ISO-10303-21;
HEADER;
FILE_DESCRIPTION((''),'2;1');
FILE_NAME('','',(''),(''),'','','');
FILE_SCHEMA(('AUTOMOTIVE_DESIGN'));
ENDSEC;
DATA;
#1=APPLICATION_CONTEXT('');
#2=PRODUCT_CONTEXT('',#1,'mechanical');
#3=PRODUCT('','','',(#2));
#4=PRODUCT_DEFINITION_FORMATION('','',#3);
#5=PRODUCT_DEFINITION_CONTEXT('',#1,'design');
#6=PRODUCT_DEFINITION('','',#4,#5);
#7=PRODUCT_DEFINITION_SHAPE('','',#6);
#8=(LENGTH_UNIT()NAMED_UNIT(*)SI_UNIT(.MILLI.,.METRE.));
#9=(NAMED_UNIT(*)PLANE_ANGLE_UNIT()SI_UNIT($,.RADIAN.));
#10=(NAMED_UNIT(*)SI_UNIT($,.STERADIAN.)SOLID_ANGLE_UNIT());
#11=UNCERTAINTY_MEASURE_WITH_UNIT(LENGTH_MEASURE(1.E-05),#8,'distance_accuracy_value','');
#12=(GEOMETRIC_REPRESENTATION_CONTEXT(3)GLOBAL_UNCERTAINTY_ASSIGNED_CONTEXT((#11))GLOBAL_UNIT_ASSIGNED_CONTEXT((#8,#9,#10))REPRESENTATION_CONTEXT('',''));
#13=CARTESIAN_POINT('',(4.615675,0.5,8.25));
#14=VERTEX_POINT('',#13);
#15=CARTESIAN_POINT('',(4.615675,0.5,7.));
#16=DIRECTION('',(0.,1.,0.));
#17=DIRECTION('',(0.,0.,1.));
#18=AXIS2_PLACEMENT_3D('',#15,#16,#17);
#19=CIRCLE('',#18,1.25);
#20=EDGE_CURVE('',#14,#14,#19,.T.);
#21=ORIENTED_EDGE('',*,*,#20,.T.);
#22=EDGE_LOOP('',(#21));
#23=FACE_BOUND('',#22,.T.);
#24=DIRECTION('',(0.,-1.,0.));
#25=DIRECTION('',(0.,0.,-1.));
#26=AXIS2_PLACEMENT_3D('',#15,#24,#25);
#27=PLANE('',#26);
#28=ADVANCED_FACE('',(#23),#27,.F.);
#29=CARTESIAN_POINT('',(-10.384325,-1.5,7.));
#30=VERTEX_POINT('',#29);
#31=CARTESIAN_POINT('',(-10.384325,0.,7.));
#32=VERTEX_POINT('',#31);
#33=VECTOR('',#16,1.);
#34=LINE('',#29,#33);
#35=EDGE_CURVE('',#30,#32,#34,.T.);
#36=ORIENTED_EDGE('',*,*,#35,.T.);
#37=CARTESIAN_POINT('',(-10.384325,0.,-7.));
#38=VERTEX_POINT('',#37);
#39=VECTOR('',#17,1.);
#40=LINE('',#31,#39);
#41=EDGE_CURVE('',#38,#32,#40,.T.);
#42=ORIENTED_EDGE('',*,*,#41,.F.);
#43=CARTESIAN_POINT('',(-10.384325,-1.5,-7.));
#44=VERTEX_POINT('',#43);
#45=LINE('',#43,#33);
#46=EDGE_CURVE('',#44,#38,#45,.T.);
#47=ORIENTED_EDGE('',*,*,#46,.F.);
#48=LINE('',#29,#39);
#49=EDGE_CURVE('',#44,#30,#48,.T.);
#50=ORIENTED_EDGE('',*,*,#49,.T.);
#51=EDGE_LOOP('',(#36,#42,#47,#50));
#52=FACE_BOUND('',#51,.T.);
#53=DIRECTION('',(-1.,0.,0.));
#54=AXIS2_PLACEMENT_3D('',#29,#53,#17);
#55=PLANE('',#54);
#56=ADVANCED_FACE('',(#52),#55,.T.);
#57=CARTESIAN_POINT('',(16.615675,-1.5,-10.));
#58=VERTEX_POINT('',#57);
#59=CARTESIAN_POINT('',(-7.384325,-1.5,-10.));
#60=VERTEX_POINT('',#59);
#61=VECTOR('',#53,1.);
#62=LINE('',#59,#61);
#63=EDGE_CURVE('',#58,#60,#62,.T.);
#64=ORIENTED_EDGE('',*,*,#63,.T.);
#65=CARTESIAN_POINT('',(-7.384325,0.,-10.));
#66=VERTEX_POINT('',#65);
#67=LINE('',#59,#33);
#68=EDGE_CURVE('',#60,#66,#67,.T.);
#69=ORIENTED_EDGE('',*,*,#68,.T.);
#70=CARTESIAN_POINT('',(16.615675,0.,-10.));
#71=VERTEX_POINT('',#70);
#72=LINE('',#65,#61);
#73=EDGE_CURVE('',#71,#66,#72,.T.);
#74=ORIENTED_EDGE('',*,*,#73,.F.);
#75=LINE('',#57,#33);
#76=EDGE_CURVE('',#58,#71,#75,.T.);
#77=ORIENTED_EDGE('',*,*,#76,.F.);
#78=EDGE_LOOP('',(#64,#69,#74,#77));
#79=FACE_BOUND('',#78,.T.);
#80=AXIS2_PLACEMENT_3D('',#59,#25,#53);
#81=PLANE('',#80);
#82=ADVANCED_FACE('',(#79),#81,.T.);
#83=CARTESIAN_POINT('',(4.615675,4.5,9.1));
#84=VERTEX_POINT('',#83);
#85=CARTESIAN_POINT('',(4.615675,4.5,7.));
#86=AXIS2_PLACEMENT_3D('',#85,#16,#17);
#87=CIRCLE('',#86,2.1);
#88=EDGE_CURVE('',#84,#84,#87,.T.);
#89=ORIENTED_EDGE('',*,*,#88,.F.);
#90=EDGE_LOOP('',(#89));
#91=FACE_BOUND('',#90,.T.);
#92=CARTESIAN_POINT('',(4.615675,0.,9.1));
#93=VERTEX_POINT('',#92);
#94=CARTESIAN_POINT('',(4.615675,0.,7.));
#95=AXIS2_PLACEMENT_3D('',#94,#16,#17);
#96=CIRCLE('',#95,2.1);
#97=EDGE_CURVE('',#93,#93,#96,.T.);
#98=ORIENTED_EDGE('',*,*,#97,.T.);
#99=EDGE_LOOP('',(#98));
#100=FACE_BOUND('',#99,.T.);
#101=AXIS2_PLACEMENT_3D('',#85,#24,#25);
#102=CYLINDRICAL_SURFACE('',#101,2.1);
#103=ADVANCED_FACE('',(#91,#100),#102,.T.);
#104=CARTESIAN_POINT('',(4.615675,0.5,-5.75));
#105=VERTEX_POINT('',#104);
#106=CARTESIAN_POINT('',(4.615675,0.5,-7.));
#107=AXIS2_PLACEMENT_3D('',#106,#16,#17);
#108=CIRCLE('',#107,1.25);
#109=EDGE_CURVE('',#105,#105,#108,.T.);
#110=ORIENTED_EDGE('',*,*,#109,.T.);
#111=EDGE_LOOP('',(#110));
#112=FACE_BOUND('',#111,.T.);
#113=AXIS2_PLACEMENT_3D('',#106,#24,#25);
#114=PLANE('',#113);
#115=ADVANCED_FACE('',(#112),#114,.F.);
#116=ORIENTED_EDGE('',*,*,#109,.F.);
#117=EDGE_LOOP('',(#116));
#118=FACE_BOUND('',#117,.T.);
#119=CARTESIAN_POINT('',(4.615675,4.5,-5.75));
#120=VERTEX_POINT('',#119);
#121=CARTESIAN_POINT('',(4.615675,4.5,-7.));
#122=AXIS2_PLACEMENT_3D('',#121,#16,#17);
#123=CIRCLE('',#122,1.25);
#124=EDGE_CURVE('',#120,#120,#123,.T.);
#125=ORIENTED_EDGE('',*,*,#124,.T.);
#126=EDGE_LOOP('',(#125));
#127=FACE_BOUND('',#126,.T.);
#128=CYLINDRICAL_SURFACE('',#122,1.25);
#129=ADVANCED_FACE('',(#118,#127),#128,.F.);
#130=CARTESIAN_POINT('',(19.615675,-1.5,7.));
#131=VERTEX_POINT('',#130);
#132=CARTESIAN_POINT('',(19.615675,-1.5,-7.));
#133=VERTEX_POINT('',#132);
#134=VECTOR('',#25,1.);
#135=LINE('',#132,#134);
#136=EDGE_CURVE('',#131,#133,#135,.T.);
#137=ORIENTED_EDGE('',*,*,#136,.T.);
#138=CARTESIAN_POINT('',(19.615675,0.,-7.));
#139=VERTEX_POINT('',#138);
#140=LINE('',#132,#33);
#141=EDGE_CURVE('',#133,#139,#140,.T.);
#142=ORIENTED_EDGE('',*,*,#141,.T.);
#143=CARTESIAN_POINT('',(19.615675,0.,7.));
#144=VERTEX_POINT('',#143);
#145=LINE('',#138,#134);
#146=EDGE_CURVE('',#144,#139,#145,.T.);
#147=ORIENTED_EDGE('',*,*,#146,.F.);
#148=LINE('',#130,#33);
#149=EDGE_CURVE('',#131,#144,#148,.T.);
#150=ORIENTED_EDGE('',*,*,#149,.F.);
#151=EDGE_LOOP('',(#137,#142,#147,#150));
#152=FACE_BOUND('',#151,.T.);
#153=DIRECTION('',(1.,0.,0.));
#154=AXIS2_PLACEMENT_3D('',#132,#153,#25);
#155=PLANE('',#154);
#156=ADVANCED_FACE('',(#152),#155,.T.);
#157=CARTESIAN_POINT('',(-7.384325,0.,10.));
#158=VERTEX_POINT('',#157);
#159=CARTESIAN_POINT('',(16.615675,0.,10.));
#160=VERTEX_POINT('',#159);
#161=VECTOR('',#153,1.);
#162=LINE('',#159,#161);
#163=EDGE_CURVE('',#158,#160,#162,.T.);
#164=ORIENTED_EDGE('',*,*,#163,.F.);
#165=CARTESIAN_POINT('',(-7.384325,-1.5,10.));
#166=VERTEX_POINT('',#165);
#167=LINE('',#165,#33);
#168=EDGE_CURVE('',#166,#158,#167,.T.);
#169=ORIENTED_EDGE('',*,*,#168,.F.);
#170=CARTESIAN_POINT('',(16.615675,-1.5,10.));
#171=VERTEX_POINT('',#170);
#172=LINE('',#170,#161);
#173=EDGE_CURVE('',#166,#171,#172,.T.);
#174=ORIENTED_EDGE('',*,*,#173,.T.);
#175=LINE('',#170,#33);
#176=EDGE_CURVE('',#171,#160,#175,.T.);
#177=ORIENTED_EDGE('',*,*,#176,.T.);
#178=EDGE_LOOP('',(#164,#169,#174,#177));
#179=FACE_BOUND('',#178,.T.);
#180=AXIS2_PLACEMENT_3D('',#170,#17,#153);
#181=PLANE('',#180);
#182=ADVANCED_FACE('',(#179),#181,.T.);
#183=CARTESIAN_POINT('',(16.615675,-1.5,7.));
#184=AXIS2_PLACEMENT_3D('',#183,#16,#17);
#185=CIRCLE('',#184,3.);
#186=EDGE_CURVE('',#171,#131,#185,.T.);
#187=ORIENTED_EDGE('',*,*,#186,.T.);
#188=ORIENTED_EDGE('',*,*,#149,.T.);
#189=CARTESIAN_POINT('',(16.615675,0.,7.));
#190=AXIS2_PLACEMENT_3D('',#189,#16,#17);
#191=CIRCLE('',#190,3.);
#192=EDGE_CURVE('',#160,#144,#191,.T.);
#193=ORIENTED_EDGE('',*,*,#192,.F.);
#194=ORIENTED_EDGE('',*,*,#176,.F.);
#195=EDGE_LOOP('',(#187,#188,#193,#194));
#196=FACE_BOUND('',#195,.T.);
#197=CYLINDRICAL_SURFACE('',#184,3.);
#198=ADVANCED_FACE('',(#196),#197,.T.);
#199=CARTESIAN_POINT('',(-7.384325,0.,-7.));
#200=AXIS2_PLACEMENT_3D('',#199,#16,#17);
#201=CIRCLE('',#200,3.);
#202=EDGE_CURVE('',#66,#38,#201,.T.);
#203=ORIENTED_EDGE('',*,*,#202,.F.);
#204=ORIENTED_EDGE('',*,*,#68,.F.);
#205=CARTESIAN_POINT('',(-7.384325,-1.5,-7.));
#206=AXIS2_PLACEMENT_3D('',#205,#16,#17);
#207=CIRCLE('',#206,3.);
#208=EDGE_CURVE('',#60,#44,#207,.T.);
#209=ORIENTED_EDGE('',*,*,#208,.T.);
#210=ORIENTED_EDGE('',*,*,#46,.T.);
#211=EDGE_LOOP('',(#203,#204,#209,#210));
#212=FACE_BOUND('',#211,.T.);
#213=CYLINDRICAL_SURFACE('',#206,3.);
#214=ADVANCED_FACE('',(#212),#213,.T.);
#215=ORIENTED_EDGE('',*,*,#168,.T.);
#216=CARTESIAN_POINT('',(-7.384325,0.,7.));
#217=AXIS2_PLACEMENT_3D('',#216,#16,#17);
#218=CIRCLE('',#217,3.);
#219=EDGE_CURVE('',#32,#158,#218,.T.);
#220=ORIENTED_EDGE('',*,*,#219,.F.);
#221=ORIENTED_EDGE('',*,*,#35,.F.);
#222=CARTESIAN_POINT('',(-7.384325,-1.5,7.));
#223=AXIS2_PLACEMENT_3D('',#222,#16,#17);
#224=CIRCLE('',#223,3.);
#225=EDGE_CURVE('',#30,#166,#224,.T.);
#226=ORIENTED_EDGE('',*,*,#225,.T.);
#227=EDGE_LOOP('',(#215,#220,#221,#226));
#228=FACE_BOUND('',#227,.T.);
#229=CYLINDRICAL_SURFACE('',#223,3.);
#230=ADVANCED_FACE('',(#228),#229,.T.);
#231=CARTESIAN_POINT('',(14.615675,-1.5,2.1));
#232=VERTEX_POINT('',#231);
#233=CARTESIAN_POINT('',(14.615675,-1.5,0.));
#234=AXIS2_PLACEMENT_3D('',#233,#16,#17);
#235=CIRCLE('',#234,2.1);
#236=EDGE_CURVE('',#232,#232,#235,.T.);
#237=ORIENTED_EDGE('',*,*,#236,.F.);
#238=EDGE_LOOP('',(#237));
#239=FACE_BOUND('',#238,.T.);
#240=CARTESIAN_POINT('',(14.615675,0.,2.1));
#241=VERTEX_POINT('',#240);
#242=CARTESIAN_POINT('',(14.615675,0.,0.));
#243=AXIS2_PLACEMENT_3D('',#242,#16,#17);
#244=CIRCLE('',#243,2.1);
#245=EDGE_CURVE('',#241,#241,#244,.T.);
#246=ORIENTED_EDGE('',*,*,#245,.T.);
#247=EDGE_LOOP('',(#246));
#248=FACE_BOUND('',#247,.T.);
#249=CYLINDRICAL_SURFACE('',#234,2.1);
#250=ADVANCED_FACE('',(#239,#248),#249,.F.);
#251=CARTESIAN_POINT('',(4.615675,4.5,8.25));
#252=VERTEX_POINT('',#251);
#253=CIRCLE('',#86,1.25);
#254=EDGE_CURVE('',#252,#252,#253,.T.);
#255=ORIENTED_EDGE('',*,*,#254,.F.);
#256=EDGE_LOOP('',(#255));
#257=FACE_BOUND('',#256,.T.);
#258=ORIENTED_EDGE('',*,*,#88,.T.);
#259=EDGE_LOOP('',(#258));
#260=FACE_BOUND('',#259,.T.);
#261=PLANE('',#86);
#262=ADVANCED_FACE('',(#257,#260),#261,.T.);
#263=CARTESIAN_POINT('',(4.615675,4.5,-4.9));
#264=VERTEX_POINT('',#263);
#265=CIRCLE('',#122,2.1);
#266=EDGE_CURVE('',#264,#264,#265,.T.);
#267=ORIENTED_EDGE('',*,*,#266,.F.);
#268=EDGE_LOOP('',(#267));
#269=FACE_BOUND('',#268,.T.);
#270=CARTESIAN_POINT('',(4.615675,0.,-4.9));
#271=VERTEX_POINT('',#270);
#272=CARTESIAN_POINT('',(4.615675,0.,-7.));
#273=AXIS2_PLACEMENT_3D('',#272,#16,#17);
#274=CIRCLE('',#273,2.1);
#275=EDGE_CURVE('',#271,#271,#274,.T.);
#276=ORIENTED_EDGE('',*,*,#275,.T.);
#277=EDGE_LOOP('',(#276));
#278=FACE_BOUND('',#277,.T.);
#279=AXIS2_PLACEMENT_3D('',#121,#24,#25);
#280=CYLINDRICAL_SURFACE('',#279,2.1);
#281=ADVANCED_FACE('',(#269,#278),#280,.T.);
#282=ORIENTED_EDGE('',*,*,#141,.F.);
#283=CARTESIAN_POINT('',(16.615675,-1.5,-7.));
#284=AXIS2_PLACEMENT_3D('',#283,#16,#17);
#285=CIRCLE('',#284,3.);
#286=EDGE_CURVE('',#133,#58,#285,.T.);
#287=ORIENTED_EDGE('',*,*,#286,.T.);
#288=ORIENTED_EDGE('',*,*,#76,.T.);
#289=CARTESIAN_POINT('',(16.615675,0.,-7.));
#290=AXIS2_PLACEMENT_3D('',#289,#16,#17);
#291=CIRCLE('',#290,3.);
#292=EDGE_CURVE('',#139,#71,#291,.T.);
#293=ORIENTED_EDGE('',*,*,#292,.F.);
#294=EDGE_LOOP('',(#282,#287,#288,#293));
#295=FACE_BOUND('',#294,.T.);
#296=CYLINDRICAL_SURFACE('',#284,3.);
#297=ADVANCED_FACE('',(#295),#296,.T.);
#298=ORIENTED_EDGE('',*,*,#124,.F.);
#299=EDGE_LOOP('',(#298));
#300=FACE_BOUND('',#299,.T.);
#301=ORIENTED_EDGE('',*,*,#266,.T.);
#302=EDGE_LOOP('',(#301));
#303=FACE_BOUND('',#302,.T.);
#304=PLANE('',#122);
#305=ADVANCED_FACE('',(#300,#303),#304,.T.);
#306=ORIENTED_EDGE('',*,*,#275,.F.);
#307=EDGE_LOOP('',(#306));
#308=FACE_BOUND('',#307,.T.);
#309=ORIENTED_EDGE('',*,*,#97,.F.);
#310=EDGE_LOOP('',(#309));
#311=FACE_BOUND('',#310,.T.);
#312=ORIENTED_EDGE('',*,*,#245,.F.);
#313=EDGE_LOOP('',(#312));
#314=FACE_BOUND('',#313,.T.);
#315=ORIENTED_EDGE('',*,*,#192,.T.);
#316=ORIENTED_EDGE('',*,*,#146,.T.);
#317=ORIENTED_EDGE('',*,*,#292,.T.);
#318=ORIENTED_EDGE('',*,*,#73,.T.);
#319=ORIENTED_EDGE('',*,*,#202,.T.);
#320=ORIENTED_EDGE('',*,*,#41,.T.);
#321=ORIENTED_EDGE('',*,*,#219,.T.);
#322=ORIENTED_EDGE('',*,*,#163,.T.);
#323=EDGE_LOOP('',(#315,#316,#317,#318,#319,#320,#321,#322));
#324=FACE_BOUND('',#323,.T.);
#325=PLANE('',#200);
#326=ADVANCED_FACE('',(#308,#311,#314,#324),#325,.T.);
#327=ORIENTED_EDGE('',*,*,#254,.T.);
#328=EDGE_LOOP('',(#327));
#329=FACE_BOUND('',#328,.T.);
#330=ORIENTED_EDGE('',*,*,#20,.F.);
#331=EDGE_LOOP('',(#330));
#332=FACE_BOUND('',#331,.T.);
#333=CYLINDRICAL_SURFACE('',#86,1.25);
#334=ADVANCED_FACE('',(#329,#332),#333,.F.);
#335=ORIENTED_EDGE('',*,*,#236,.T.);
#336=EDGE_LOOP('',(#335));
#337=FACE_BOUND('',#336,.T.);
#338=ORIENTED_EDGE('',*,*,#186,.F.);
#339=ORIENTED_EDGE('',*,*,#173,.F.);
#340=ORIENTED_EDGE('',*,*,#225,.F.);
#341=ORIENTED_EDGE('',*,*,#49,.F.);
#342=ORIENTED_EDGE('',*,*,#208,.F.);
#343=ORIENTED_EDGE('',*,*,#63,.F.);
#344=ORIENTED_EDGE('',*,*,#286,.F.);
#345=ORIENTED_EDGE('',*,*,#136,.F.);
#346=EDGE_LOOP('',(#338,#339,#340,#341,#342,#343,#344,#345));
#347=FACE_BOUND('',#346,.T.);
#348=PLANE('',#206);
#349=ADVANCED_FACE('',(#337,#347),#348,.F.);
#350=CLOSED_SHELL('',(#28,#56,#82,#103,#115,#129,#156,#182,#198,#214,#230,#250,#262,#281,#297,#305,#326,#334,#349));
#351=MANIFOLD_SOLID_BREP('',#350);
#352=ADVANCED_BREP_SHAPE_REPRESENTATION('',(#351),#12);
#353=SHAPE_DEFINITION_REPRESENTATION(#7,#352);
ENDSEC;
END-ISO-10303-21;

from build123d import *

# Parameters (mm, degrees)
SKETCH_1_R             = 2.1
SM_BASE_FLANGE_1_DEPTH = 1.5
SKETCH_2_R             = 2.1
EXTRUDE_1_DEPTH        = 4.5
HOLE_WIZARD_M3_1_D     = 2.5
HOLE_WIZARD_M3_1_DEPTH = 4


# Sheet-metal steps are written as plain solids
with BuildPart() as part:
    # Sketch 1 → 基体-法兰1 (new body)
    with BuildSketch(Plane(origin=(0, 0, 0), x_dir=(1, 0, 0), z_dir=(0, 1, 0))):
        with BuildLine():
            Line((-7.384325118, 10), (16.615674882, 10))
            ThreePointArc((16.615674882, 10), (18.736995226, 9.121320344), (19.615674882, 7))
            Line((19.615674882, 7), (19.615674882, -7))
            ThreePointArc((19.615674882, -7), (18.736995226, -9.121320344), (16.615674882, -10))
            Line((16.615674882, -10), (-7.384325118, -10))
            ThreePointArc((-7.384325118, -10), (-9.505645461, -9.121320344), (-10.384325118, -7))
            Line((-10.384325118, -7), (-10.384325118, 7))
            ThreePointArc((-10.384325118, 7), (-9.505645461, 9.121320344), (-7.384325118, 10))
        make_face()
        with Locations(Location((14.615674882, 0, 0), (0, 0, 270))):
            Circle(SKETCH_1_R, mode=Mode.SUBTRACT)
    extrude(amount=-SM_BASE_FLANGE_1_DEPTH)

    # Sketch 2 → 凸台-拉伸1 (add)
    with BuildSketch(Plane(origin=(0, 0, 0), x_dir=(1, 0, 0), z_dir=(0, 1, 0))):
        with Locations(Location((4.615674882, 7, 0), (0, 0, 270))):
            Circle(SKETCH_2_R)
        with Locations(Location((4.615674882, -7, 0), (0, 0, 270))):
            Circle(SKETCH_2_R)
    extrude(amount=EXTRUDE_1_DEPTH)

    # M3 螺纹孔1
    with Locations(Plane(origin=(0, 4.5, 0), x_dir=(1, 0, 0), z_dir=(0, 1, 0))):
        with Locations((4.615674882, 7), (4.615674882, -7)):
            Hole(HOLE_WIZARD_M3_1_D / 2, depth=HOLE_WIZARD_M3_1_DEPTH)


solid = part.part
